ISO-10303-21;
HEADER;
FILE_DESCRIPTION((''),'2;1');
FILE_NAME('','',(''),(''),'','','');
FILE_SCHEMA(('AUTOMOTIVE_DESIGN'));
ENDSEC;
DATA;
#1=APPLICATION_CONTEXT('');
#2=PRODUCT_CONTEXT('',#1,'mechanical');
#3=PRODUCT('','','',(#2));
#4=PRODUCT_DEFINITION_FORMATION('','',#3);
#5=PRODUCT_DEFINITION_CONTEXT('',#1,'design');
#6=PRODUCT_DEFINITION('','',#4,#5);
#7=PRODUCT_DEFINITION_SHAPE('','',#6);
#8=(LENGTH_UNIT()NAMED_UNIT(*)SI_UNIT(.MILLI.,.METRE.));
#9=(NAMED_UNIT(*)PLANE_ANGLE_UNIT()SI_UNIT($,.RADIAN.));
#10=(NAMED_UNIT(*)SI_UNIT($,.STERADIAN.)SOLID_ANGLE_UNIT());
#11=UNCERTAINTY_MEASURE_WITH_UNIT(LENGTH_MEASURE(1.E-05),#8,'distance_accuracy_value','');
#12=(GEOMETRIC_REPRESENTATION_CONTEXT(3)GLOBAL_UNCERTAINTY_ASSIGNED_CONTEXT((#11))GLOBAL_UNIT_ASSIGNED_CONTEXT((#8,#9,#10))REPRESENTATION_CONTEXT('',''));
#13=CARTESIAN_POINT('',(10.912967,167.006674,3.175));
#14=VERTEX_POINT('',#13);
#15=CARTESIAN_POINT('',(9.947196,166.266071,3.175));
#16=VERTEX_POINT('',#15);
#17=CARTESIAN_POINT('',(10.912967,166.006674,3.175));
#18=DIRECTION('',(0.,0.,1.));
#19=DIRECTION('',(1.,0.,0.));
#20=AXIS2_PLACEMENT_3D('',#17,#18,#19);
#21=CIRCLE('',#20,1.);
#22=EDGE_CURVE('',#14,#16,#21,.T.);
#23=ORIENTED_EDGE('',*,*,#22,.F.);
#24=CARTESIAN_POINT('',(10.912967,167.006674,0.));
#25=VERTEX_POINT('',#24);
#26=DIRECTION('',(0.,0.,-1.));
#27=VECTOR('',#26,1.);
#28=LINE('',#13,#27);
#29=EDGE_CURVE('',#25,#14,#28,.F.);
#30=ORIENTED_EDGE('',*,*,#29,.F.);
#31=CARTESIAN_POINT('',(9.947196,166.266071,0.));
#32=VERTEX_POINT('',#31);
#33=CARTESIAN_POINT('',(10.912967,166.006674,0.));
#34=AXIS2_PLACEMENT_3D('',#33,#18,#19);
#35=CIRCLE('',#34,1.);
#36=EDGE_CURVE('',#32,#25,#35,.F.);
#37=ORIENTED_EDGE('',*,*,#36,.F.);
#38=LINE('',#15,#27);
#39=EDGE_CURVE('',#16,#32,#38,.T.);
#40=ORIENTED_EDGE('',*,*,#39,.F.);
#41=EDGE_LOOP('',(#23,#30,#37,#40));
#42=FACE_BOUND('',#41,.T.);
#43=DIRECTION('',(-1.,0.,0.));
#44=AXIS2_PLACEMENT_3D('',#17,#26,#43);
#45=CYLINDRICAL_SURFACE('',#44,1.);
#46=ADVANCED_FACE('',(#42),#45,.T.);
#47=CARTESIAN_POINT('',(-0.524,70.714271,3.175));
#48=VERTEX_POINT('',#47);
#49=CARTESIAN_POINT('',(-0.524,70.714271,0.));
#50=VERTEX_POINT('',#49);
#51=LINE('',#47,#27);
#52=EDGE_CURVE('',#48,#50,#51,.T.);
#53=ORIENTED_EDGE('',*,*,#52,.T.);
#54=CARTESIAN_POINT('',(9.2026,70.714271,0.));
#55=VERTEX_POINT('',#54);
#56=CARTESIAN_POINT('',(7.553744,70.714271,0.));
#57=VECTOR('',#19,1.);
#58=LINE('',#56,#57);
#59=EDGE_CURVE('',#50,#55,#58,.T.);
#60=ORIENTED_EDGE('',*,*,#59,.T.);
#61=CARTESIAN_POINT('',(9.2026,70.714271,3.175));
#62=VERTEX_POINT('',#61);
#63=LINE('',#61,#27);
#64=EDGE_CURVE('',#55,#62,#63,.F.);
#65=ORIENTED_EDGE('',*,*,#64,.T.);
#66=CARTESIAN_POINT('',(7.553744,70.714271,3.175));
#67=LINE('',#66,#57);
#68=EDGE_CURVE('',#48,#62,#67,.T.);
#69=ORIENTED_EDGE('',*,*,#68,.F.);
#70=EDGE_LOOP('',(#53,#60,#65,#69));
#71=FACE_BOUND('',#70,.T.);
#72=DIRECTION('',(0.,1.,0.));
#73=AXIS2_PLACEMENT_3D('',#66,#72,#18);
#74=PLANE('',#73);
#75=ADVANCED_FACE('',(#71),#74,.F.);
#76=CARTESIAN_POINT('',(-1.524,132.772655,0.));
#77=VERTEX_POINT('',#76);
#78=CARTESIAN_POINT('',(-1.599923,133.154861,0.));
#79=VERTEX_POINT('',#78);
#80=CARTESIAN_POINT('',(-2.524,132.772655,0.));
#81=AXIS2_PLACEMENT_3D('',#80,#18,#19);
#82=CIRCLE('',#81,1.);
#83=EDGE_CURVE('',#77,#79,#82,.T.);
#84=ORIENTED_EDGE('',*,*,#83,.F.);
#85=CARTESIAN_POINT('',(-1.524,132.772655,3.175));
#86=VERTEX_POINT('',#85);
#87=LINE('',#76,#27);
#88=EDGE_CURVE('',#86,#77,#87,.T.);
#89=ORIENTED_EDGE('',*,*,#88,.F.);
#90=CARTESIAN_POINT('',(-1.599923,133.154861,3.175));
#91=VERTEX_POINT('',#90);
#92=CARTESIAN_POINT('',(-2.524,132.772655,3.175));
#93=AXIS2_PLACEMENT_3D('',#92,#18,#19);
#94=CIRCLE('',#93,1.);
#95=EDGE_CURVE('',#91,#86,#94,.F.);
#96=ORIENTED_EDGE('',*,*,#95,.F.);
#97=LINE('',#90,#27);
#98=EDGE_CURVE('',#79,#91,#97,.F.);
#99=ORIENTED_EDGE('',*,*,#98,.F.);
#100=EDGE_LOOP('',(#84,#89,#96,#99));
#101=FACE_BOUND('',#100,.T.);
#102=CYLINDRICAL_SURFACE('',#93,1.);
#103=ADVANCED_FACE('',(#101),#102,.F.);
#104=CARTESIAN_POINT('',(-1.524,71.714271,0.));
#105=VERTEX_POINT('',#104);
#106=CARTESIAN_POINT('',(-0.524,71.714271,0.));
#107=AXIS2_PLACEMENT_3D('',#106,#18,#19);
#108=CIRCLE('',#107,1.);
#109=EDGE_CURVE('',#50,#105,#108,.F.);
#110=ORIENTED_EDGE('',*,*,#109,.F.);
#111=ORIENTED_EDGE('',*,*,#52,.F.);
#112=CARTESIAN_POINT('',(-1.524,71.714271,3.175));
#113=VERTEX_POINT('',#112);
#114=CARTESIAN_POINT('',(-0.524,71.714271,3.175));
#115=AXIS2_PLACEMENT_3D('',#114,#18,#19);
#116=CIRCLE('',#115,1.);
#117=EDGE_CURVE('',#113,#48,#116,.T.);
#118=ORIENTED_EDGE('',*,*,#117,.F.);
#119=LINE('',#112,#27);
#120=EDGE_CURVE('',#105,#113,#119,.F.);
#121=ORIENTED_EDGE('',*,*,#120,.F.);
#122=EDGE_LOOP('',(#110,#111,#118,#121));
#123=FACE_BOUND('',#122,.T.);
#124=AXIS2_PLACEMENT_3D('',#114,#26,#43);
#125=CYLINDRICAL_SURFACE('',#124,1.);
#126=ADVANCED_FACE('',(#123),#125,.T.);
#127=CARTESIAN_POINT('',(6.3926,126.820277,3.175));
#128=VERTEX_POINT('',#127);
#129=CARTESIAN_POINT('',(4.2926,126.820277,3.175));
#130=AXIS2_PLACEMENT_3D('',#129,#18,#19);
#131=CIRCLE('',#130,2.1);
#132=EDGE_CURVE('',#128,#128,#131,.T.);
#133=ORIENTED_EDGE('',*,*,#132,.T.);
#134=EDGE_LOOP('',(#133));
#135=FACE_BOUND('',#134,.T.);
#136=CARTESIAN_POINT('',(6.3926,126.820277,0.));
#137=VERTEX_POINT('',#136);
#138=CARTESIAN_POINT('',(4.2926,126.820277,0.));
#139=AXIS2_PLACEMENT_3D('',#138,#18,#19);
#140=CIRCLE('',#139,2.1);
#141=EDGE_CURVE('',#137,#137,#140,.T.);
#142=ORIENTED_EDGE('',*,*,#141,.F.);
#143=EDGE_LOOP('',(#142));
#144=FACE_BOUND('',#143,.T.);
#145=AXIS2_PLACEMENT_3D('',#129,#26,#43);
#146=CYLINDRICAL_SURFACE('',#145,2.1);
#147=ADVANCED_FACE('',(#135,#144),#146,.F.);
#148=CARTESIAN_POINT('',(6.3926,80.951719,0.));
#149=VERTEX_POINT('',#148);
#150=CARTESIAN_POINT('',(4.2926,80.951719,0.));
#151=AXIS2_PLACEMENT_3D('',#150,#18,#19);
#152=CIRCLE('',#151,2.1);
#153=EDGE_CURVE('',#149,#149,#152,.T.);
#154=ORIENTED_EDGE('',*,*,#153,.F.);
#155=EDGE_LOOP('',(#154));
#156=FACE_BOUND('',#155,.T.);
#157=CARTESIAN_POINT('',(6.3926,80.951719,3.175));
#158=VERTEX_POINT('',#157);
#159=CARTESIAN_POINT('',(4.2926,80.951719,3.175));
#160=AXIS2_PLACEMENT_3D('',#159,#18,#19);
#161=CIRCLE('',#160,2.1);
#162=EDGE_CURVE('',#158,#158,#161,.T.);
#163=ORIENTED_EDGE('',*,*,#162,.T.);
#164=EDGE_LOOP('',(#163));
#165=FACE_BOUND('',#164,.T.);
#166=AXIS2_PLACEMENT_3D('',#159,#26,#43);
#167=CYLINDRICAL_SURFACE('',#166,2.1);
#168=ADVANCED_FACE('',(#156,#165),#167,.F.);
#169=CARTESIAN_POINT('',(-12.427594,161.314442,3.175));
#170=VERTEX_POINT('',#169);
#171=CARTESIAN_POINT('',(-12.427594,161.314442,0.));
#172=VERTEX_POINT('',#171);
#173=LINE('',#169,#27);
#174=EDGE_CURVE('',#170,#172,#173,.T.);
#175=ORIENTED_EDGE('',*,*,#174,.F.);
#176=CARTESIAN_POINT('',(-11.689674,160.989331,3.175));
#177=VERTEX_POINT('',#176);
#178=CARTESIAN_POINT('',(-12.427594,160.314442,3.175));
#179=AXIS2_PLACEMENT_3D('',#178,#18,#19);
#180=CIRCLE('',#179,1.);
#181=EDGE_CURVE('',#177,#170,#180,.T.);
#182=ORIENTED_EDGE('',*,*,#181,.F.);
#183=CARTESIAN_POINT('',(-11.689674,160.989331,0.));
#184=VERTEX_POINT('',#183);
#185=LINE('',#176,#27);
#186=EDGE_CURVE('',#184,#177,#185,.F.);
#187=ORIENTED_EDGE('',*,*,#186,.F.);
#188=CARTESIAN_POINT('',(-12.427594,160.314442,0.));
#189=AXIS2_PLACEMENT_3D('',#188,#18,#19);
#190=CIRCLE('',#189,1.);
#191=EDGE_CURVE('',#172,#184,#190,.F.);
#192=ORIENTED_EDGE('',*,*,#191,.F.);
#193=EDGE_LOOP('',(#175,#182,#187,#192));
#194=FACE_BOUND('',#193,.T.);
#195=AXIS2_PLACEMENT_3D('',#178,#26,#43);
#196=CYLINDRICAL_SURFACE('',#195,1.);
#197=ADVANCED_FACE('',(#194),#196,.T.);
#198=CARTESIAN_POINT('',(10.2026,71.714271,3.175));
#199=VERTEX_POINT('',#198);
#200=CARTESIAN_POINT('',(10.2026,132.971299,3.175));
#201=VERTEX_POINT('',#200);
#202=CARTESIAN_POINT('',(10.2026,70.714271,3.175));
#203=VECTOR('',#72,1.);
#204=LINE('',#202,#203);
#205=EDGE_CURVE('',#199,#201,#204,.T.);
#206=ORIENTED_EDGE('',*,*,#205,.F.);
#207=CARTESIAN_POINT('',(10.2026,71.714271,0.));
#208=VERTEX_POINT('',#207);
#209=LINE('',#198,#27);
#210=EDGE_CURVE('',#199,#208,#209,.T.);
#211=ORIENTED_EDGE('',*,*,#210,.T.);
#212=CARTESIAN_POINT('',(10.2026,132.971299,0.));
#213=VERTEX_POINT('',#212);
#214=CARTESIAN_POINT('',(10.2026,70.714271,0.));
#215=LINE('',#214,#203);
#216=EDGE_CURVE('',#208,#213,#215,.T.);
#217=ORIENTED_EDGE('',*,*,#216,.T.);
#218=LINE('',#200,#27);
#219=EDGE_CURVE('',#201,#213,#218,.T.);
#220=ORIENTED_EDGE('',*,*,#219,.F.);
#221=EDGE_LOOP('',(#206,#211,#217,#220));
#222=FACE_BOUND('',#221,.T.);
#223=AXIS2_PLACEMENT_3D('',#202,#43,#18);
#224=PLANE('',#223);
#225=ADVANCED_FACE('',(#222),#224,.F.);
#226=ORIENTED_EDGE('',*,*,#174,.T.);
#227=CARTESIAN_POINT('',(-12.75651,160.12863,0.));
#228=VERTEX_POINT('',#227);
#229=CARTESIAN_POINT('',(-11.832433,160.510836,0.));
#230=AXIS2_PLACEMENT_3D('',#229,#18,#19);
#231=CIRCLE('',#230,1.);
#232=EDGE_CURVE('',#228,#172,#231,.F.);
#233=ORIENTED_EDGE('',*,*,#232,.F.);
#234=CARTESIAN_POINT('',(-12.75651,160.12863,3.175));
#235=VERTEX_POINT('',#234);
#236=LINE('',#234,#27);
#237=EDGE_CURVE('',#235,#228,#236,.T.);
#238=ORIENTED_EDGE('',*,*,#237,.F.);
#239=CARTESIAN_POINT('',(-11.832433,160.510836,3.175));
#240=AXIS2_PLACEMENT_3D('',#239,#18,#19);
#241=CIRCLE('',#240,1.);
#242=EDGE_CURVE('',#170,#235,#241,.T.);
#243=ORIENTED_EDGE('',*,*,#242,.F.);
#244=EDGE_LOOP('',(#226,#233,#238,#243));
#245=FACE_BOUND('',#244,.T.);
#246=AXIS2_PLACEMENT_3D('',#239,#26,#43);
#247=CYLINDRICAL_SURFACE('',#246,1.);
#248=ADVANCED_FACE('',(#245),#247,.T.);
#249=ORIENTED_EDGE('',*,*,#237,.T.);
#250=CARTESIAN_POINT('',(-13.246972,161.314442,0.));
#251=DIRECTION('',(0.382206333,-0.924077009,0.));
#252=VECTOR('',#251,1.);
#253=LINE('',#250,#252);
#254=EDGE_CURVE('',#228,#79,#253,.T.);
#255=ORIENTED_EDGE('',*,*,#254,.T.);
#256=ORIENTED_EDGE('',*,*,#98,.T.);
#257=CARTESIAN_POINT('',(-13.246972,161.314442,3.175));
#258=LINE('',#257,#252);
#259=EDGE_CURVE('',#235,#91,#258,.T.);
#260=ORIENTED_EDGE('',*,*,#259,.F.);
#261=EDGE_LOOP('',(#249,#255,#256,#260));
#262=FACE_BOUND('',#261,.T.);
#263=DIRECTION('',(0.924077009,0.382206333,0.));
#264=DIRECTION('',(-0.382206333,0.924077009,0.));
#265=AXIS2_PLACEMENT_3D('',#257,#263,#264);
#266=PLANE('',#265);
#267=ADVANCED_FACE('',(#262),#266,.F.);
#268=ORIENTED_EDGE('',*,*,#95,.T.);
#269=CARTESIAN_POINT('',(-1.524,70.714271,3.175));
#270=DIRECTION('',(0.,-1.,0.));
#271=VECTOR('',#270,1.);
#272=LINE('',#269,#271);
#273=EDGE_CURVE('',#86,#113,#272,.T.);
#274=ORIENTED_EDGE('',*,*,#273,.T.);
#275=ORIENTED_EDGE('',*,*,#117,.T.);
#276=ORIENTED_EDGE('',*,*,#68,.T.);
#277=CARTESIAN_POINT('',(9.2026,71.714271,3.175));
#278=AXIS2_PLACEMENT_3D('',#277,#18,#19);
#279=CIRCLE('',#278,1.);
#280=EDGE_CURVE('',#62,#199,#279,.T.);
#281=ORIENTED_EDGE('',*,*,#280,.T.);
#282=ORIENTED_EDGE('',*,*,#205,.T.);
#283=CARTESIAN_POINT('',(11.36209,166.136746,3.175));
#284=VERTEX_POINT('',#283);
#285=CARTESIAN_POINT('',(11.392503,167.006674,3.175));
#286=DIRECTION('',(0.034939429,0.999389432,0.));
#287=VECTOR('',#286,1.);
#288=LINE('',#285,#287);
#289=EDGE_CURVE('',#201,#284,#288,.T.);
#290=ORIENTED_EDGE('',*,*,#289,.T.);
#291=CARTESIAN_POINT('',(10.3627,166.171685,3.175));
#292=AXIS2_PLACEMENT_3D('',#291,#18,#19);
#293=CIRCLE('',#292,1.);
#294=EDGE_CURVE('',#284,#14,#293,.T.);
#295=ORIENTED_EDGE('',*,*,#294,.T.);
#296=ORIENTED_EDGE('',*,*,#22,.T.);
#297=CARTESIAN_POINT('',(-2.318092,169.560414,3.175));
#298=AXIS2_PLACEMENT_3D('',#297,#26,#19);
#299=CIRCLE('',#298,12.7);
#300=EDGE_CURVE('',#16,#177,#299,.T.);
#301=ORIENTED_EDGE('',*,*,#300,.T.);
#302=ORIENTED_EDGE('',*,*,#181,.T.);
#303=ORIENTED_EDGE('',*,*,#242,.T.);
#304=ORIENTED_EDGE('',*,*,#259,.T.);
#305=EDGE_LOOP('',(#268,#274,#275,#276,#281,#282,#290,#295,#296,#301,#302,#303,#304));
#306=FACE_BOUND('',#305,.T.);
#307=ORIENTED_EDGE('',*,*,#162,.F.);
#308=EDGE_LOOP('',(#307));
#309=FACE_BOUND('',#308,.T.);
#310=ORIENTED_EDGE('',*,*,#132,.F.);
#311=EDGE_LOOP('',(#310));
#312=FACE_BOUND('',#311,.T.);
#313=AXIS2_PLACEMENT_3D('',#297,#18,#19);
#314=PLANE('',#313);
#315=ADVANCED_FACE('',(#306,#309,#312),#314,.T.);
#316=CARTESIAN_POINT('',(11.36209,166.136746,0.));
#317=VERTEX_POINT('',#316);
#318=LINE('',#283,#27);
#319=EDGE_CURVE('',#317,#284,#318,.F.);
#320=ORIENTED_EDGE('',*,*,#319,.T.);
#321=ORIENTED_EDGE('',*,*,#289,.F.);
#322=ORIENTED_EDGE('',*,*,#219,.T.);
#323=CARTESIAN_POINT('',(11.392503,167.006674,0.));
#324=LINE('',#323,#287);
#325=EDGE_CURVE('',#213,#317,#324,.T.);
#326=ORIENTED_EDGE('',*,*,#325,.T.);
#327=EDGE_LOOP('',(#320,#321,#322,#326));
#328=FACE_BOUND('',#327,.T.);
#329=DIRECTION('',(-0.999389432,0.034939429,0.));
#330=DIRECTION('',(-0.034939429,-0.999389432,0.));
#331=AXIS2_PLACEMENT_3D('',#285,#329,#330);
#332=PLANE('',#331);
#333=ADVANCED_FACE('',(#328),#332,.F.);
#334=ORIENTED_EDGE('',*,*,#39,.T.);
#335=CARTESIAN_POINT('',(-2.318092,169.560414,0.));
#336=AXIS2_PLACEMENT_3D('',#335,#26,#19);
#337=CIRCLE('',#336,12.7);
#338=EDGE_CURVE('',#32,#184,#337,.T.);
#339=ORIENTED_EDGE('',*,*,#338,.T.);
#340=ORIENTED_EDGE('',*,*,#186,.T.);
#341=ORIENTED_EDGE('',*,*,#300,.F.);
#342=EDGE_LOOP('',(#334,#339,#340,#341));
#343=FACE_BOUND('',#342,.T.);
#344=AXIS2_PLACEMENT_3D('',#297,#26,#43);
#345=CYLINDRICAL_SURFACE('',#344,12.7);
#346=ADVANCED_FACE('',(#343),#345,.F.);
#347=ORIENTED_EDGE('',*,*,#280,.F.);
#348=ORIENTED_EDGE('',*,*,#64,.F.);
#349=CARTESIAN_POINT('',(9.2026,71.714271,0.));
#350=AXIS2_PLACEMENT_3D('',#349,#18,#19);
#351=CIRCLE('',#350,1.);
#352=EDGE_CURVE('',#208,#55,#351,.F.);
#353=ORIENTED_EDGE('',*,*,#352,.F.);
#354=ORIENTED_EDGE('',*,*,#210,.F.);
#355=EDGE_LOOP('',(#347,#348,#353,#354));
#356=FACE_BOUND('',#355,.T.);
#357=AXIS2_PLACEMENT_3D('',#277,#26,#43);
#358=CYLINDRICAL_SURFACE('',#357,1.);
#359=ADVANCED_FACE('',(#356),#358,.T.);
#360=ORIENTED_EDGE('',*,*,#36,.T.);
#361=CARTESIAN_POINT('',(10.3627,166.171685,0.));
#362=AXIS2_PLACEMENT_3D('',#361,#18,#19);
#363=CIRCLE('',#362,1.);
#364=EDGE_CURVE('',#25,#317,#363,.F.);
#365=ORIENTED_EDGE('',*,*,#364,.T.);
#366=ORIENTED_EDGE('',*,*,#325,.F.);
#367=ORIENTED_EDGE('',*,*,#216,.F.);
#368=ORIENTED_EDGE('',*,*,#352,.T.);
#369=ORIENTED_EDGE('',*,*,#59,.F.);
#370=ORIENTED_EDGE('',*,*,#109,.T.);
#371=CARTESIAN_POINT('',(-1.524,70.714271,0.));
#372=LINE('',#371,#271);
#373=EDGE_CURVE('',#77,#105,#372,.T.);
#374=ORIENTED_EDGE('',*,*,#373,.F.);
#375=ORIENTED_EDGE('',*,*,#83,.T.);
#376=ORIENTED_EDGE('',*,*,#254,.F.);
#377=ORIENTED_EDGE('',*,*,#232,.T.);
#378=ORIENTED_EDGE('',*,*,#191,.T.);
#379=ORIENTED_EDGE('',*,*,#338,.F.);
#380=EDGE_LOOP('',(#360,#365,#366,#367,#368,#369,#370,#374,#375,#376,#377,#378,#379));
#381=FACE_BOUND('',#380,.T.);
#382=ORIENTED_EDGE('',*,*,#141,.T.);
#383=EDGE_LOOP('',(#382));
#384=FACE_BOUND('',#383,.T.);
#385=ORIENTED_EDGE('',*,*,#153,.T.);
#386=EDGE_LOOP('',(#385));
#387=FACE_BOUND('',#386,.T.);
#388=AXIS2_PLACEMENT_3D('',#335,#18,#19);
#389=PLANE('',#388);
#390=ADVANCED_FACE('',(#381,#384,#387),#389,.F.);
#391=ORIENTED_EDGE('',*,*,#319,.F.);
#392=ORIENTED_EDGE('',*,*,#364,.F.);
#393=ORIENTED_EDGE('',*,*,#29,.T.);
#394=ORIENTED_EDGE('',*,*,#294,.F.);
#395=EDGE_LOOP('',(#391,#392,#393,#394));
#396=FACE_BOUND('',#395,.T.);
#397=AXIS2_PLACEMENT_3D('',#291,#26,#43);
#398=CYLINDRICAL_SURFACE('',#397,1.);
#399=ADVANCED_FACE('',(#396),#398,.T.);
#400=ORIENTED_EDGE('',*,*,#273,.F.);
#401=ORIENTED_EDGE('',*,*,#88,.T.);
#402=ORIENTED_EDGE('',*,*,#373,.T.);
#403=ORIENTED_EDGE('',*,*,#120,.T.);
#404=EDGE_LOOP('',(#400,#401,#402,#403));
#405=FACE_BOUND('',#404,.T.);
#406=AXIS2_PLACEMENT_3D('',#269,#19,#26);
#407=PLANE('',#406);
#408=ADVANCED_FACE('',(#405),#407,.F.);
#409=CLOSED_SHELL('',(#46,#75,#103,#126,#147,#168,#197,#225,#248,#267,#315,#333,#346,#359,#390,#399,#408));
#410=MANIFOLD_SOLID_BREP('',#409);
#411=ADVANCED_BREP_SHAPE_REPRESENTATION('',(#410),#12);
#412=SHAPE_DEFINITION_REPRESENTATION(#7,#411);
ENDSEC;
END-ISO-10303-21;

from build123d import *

# Parameters (mm, degrees)
SKETCH1_R           = 2.1
BOSS_EXTRUDE1_DEPTH = 3.175
FILLET2_R           = 1
FILLET3_R           = 1


with BuildPart() as part:
    # Sketch1 → Boss-Extrude1 (new body)
    with BuildSketch(Plane.XY):
        with BuildLine():
            Line((7.553744451, 70.714270531), (-1.524, 70.714270531))
            Line((-1.524, 70.714270531), (-1.524, 132.971298819))
            Line((-1.524, 132.971298819), (-13.246972093, 161.314442451))
            Line((-13.246972093, 161.314442451), (-11.976972093, 161.314442451))
            ThreePointArc((-11.976972093, 161.314442451), (0.849692503, 157.261830841), (10.122503099, 167.006674049))
            Line((10.122503099, 167.006674049), (11.392503099, 167.006674049))
            Line((11.392503099, 167.006674049), (10.2026, 132.971298819))
            Line((10.2026, 132.971298819), (10.2026, 70.714270531))
            Line((10.2026, 70.714270531), (7.553744451, 70.714270531))
        make_face()
        with Locations((4.2926, 126.820276743)):
            Circle(SKETCH1_R, mode=Mode.SUBTRACT)
        with Locations((4.2926, 80.951718801)):
            Circle(SKETCH1_R, mode=Mode.SUBTRACT)
    extrude(amount=BOSS_EXTRUDE1_DEPTH)

    # Fillet2
    fillet2_edges = [part.edges().sort_by_distance(p)[0] for p in [
        (-11.976972093, 161.314442451, 1.5875),
        (10.122503099, 167.006674049, 1.5875),
        (10.2026, 70.714270531, 1.5875),
        (-1.524, 70.714270531, 1.5875),
        (-1.524, 132.971298819, 1.5875),
    ]]
    fillet(fillet2_edges, radius=FILLET2_R)

    # Fillet3
    # the kernel refuses this fillet: 1 mm, written as the material it takes off along each edge
    with BuildSketch(Plane(origin=(-13.246972093, 161.314442451, -3.208100544), x_dir=(1, 0, 0), z_dir=(0, 0, 1))) as fillet3_piece_1:
        with BuildLine():
            CenterArc((1.414539547, -0.803606449), FILLET3_R, 126.524113779, 75.946301344)
            Line((0.490462538, -1.185812782), (0.471980998, -1.193456909))
            Line((0.471980998, -1.193456909), (-0.01848154, -0.007644127))
            Line((-0.01848154, -0.007644127), (0, 0.02))
            ThreePointArc((0, 0.02), (0.409689249, 0.02), (0.807475277, 0.016072129))
            Line((0.807475277, 0.016072129), (0.819378498, 0))
        make_face()
    extrude(amount=9.591201087, mode=Mode.SUBTRACT)
    with BuildSketch(Plane(origin=(11.392503099, 167.006674049, -2.176149378), x_dir=(-1, 0, 0), z_dir=(0, 0, 1))) as fillet3_piece_2:
        with BuildLine():
            CenterArc((1.029802799, 0.834988847), FILLET3_R, 177.997710642, 58.616966228)
            Line((0.030413367, 0.869928276), (0.010425578, 0.870627065))
            Line((0.010425578, 0.870627065), (-0.019987789, 0.000698789))
            Line((-0.019987789, 0.000698789), (0, -0.02))
            ThreePointArc((0, -0.02), (0.239767965, -0.02), (0.468530594, -0.016699777))
            Line((0.468530594, -0.016699777), (0.479535931, 0))
        make_face()
    extrude(amount=7.527298756, mode=Mode.SUBTRACT)


solid = part.part
